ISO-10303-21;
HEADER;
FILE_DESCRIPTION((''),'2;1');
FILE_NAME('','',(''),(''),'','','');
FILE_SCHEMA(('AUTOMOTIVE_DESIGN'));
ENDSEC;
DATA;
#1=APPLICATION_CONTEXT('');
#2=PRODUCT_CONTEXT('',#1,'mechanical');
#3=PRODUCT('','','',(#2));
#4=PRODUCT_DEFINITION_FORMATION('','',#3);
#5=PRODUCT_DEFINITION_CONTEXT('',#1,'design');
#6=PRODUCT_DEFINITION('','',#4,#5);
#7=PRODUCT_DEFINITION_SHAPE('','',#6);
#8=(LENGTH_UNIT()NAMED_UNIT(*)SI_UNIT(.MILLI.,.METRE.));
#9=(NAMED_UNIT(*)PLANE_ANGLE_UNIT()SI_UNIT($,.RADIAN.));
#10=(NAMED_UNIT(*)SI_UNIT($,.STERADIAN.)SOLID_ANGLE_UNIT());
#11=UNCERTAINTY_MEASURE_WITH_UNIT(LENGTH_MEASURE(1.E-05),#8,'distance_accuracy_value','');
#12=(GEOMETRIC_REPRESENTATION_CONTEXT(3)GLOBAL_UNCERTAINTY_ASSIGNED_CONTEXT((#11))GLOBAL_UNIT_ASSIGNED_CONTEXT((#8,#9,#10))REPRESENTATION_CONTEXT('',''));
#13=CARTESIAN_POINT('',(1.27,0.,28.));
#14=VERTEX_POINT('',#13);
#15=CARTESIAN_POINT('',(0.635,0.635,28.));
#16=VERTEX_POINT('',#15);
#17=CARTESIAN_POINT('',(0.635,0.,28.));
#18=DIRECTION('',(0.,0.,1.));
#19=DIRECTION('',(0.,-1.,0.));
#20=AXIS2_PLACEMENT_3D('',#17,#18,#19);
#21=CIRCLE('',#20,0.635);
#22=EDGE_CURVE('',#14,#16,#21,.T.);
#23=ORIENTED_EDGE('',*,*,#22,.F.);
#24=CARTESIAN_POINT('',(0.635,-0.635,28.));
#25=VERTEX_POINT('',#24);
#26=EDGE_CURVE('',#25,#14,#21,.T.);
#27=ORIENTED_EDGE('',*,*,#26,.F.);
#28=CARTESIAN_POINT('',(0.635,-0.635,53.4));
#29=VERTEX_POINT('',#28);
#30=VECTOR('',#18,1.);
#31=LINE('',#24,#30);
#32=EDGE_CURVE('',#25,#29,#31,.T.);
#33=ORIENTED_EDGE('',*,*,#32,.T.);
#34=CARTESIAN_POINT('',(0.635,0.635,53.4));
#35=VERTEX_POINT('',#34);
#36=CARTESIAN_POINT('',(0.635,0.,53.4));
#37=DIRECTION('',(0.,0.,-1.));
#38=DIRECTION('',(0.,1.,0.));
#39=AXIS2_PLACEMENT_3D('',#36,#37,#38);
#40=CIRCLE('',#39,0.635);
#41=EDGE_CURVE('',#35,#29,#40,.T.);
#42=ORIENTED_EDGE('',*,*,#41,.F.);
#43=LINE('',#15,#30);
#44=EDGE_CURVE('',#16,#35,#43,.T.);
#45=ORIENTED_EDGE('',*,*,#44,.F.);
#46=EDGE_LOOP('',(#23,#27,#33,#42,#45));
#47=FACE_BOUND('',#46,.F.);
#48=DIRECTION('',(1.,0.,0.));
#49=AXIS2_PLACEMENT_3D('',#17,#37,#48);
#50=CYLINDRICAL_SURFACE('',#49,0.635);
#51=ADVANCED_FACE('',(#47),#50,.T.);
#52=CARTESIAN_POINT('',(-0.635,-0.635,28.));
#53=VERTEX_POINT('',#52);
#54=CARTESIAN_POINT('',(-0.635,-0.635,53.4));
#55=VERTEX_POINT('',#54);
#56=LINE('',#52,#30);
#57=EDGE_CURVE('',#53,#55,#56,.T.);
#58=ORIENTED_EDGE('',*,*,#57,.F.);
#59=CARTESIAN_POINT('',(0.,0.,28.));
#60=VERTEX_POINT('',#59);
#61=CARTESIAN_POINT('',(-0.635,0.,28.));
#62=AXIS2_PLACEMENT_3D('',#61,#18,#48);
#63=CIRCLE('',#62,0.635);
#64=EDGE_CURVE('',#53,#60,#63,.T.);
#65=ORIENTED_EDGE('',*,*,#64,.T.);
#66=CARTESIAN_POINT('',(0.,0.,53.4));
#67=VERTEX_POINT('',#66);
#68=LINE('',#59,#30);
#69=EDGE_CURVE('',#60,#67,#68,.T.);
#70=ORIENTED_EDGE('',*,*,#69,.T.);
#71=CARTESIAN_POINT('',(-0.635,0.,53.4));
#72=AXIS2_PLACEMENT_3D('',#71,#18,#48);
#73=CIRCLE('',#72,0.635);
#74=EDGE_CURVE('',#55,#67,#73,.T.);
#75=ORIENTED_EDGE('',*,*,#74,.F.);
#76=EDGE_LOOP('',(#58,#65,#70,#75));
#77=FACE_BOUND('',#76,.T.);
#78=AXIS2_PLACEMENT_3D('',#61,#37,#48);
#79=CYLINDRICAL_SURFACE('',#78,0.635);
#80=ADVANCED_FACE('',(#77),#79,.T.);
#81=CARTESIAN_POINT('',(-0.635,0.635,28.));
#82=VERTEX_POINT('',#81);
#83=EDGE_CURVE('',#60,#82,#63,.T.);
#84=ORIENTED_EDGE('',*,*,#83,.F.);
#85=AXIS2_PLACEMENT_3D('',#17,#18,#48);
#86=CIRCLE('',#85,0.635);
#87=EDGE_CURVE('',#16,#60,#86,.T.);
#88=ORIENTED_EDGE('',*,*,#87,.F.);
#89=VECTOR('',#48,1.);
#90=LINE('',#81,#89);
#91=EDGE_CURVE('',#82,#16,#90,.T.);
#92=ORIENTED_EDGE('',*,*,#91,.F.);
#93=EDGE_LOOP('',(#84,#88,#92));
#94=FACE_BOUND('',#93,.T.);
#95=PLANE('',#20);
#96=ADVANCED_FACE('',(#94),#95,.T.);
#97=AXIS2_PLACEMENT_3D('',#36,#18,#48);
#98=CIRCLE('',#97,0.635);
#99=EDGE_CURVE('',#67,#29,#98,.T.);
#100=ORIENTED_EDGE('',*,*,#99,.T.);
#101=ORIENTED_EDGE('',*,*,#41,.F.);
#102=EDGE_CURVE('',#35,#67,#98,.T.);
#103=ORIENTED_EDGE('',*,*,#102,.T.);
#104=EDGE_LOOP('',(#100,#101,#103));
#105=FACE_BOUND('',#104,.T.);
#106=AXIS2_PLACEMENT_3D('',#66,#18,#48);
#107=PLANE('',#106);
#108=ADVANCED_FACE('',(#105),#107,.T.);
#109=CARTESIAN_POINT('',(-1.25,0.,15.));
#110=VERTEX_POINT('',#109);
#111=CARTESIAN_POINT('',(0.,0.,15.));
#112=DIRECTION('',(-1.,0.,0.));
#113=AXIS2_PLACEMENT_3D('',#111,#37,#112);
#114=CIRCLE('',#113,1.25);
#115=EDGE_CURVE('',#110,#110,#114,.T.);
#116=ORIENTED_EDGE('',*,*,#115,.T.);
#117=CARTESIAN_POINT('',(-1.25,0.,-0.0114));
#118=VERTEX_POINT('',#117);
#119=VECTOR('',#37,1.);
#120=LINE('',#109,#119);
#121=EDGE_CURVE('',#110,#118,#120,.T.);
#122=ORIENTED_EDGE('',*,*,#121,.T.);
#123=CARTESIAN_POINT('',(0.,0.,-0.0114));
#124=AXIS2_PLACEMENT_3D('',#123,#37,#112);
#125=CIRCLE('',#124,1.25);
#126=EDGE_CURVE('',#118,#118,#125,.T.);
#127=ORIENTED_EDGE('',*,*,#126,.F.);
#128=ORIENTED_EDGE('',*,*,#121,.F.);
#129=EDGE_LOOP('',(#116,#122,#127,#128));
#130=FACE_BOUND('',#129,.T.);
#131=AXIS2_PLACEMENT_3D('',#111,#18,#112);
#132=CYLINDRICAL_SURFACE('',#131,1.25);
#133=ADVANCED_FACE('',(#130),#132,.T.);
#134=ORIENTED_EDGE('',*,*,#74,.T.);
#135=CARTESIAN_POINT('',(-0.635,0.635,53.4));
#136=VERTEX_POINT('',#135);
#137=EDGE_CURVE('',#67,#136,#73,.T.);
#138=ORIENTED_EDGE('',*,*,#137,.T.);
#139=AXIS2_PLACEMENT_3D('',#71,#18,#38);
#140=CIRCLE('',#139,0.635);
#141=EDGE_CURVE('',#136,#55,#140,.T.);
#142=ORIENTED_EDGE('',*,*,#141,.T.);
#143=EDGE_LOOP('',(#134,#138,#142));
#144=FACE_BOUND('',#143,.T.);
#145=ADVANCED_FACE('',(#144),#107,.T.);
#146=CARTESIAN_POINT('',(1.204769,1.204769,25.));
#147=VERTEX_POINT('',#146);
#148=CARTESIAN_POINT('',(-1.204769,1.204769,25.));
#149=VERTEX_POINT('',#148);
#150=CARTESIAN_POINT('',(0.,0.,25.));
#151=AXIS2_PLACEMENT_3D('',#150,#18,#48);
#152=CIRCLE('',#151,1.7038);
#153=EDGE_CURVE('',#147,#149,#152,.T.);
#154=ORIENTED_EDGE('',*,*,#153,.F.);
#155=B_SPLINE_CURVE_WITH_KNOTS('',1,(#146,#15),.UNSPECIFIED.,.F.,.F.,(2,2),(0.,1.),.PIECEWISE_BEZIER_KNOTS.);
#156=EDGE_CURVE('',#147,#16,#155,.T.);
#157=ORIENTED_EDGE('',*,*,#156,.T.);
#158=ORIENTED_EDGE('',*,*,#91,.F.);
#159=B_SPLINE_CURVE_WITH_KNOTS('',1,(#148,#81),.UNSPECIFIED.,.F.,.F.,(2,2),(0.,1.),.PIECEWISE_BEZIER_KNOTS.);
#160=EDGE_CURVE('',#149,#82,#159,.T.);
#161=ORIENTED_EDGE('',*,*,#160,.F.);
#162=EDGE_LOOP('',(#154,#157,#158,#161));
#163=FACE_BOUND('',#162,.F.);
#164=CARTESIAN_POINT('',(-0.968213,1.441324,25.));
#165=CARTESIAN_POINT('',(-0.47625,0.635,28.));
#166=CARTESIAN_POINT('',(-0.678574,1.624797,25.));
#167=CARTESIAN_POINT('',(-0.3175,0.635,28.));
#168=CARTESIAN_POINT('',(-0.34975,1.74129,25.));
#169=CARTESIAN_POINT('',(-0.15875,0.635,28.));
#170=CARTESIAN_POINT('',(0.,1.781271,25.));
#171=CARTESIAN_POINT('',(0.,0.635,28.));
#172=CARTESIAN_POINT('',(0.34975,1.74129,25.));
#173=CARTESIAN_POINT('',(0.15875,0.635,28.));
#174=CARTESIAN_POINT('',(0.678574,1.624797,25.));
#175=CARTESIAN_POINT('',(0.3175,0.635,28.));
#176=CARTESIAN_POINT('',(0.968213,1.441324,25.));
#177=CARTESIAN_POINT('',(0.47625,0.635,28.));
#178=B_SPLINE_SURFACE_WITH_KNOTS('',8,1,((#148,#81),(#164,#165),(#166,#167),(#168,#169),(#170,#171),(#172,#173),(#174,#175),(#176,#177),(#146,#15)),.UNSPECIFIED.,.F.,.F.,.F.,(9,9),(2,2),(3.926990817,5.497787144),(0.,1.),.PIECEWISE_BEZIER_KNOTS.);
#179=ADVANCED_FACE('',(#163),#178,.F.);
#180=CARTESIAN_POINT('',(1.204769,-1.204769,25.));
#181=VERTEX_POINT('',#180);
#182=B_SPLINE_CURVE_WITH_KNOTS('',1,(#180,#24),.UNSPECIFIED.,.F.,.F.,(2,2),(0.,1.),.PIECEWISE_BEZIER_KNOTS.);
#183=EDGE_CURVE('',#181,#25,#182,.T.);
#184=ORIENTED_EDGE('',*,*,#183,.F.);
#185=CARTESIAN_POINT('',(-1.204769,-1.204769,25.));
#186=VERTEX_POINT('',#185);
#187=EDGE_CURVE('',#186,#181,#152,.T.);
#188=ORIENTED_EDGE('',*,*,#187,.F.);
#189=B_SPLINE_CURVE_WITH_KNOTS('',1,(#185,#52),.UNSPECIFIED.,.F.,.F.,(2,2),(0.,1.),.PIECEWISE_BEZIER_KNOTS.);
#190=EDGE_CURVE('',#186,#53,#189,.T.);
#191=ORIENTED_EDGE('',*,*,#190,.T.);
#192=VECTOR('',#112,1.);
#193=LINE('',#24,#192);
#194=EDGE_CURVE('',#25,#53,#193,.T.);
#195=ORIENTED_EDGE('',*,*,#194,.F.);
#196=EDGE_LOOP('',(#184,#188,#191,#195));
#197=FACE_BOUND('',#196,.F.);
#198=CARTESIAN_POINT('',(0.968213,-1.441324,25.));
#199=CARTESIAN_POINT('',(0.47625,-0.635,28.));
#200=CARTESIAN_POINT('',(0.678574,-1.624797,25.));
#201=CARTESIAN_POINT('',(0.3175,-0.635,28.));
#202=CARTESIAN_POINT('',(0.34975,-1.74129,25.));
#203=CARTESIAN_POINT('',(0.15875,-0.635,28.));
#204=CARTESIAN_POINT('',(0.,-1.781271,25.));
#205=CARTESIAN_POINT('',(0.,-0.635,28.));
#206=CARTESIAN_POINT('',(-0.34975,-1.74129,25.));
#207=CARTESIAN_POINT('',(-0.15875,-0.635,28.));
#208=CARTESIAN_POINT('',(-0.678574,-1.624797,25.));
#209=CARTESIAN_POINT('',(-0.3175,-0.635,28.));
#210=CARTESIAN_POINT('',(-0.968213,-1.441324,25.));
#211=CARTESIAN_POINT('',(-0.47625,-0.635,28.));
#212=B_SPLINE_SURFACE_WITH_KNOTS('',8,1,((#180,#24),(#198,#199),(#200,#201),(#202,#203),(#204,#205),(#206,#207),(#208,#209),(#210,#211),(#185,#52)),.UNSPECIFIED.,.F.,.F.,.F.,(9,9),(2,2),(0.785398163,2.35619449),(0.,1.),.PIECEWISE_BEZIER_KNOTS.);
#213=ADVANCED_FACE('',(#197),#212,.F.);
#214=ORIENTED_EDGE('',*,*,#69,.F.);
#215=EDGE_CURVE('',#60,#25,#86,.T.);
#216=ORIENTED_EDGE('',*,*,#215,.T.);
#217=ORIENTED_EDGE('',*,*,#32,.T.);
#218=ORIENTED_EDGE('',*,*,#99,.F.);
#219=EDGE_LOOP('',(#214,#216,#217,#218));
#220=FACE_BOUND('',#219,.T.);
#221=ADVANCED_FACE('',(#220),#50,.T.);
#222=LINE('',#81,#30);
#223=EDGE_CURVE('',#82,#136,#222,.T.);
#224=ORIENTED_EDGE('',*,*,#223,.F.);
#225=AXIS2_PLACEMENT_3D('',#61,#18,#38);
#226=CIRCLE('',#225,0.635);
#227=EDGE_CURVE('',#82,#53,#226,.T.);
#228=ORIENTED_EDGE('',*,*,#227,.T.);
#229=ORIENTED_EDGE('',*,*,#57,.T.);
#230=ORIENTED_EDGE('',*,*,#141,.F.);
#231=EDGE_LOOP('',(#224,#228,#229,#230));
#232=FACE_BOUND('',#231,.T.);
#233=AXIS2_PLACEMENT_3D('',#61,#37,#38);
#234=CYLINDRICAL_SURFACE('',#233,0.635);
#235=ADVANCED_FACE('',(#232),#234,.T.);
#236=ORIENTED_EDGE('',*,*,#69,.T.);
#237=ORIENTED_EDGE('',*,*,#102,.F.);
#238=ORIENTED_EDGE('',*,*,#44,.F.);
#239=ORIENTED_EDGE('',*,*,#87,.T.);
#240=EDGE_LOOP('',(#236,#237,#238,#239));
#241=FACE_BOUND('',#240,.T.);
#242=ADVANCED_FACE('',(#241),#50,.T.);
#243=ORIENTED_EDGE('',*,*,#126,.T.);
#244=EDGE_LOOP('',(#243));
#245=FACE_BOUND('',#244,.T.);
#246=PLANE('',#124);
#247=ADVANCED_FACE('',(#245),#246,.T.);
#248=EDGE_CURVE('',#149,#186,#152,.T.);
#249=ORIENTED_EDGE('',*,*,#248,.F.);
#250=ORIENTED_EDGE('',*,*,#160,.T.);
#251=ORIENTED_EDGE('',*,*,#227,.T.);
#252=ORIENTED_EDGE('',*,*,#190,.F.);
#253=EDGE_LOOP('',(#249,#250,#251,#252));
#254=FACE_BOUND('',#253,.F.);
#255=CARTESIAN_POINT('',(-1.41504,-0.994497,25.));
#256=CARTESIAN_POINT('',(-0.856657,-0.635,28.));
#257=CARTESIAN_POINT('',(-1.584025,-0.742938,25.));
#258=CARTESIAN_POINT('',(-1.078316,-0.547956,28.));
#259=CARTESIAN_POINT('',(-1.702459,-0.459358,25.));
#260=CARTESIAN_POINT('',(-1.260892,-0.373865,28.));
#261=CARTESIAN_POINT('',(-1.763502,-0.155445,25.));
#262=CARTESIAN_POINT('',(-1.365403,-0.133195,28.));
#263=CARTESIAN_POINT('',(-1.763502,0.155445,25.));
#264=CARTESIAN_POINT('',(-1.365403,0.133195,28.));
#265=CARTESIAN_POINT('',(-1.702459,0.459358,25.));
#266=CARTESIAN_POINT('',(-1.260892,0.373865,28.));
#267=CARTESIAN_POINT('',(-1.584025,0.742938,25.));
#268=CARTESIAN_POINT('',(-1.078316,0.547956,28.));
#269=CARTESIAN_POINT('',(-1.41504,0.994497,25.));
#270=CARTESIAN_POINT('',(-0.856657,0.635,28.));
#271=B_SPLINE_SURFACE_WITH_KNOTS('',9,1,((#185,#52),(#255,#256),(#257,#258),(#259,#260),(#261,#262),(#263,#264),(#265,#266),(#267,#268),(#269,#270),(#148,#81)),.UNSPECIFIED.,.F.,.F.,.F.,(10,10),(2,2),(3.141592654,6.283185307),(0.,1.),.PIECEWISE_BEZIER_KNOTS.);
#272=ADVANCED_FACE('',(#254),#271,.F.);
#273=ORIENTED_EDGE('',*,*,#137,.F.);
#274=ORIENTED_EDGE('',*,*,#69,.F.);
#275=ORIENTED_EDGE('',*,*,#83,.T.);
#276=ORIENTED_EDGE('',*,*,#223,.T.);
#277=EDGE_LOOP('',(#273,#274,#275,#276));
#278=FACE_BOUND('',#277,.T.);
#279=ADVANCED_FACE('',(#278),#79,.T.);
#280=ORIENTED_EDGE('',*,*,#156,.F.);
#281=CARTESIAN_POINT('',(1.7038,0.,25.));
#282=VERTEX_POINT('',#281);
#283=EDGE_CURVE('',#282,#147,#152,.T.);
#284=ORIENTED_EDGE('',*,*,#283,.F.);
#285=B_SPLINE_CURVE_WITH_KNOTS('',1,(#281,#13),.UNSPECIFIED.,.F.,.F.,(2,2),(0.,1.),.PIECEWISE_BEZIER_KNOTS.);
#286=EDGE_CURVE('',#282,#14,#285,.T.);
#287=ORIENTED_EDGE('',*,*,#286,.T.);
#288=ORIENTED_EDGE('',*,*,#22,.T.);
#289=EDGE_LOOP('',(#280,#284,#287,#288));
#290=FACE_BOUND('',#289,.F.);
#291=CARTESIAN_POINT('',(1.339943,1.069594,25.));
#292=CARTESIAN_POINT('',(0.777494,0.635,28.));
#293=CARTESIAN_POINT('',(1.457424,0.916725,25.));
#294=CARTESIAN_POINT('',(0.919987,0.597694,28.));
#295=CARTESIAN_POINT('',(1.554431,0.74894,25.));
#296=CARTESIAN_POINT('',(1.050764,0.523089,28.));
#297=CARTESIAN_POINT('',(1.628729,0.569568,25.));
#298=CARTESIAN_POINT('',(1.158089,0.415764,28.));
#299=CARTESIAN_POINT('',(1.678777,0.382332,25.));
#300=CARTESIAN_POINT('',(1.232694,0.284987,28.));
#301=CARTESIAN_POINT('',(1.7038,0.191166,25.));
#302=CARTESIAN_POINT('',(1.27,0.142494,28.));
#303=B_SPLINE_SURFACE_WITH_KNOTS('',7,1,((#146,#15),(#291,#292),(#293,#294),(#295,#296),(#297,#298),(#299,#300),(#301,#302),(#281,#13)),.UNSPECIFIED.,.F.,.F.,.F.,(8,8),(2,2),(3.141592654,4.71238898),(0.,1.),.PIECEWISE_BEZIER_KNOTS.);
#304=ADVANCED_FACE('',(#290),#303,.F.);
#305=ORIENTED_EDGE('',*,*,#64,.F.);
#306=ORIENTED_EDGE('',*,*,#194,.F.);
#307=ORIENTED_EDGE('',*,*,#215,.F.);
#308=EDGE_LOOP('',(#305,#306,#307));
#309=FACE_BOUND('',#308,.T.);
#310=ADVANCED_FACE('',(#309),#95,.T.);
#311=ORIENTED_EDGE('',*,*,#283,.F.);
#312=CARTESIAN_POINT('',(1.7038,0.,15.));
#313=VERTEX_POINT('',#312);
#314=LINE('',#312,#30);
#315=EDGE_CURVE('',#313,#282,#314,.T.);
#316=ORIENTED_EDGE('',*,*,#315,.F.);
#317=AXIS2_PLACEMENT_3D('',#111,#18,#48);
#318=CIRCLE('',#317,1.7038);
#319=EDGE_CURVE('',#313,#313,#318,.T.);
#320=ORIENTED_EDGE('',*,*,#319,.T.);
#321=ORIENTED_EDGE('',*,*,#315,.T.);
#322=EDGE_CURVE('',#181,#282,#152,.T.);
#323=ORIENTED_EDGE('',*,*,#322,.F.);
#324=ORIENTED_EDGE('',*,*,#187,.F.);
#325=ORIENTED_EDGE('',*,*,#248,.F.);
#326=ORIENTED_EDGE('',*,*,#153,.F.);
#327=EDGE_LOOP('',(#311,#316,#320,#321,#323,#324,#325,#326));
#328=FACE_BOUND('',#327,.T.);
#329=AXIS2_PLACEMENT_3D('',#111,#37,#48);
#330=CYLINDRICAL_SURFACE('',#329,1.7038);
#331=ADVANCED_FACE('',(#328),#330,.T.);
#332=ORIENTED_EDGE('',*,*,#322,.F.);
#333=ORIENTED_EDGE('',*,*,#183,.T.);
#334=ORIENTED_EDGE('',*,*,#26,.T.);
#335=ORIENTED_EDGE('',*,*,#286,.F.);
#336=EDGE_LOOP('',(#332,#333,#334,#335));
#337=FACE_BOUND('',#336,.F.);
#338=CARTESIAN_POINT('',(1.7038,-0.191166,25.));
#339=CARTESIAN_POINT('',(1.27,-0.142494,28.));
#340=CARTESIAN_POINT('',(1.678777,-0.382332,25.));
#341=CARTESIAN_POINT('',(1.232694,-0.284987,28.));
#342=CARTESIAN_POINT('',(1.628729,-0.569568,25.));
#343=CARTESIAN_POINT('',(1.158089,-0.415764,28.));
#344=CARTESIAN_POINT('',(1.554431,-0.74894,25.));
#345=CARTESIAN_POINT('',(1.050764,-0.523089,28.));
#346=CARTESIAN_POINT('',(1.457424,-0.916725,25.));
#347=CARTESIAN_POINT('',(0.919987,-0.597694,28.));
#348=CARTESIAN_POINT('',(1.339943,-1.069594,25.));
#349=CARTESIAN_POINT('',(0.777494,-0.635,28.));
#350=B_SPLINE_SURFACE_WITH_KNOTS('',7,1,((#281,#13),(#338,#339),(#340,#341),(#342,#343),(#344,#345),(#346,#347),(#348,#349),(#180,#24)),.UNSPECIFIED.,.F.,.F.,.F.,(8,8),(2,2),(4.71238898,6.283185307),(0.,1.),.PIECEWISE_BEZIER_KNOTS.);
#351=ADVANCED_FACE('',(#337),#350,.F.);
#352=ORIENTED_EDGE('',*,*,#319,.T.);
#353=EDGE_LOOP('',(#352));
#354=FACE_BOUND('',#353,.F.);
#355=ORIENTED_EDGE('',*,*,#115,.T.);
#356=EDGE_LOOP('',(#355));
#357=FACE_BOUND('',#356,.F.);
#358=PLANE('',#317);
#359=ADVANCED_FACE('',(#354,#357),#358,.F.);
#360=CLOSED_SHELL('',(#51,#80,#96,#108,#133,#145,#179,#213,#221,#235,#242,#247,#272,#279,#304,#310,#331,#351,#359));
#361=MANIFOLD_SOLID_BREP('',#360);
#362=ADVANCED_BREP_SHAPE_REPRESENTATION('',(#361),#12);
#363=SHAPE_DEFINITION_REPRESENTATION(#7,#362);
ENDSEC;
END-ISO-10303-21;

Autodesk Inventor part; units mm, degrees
ref_plane "YZ Plane" through (0, 0, 0) normal (1, 0, 0) x (0, 1, 0)
ref_plane "Work Plane7" through (0, 0, 15) normal (0, 0, 1) x (1, 0, 0)
sketch "Sketch6" plane through (0, 0, 15) normal (0, 0, 1) x (1, 0, 0)
  circle A0 centre (0, 0) radius 1.7038
  dimension "d21" = 3.4076
extrude "Extrusion2" add sketch "Sketch6" along normal blind 10
ref_plane "Work Plane4" through (0, 0, 28) normal (0, 0, 1) x (1, 0, 0)
sketch "Sketch7" plane through (0, 0, 28) normal (0, 0, 1) x (1, 0, 0)
  arc A0 (-0.635, 0.635) -> (-0.635, -0.635) centre (-0.635, 0) ccw
  arc A1 (0.635, -0.635) -> (0.635, 0.635) centre (0.635, 0) ccw
  line L0 (-0.635, 0.635) -> (0.635, 0.635)
  line L1 (0.635, -0.635) -> (-0.635, -0.635)
loft "Loft4" add profiles "Sketch7" section 1 edges at (-1.7038, 0, 25)
sketch "Sketch8" plane through (0, 0, 28) normal (0, 0, 1) x (1, 0, 0)
  arc A0 (-0.635, 0.635) -> (-0.635, -0.635) centre (-0.635, 0) ccw projected
  circle A1 centre (-0.635, 0) radius 0.635
  arc A2 (0.635, -0.635) -> (0.635, 0.635) centre (0.635, 0) ccw projected
  circle A3 centre (0.635, 0) radius 0.635
  point P0 (0, 0)
extrude "Extrusion3" add sketch "Sketch8" along normal blind 25.4
sketch "Sketch9" plane through (0, 0, 15) normal (0, 0, -1) x (-1, 0, 0)
  circle A0 centre (0, 0) radius 1.25
  dimension "d36" = 2.5
extrude "Extrusion4" add sketch "Sketch9" along normal blind 15.0114
properties part number "Male End Audio Jack"
